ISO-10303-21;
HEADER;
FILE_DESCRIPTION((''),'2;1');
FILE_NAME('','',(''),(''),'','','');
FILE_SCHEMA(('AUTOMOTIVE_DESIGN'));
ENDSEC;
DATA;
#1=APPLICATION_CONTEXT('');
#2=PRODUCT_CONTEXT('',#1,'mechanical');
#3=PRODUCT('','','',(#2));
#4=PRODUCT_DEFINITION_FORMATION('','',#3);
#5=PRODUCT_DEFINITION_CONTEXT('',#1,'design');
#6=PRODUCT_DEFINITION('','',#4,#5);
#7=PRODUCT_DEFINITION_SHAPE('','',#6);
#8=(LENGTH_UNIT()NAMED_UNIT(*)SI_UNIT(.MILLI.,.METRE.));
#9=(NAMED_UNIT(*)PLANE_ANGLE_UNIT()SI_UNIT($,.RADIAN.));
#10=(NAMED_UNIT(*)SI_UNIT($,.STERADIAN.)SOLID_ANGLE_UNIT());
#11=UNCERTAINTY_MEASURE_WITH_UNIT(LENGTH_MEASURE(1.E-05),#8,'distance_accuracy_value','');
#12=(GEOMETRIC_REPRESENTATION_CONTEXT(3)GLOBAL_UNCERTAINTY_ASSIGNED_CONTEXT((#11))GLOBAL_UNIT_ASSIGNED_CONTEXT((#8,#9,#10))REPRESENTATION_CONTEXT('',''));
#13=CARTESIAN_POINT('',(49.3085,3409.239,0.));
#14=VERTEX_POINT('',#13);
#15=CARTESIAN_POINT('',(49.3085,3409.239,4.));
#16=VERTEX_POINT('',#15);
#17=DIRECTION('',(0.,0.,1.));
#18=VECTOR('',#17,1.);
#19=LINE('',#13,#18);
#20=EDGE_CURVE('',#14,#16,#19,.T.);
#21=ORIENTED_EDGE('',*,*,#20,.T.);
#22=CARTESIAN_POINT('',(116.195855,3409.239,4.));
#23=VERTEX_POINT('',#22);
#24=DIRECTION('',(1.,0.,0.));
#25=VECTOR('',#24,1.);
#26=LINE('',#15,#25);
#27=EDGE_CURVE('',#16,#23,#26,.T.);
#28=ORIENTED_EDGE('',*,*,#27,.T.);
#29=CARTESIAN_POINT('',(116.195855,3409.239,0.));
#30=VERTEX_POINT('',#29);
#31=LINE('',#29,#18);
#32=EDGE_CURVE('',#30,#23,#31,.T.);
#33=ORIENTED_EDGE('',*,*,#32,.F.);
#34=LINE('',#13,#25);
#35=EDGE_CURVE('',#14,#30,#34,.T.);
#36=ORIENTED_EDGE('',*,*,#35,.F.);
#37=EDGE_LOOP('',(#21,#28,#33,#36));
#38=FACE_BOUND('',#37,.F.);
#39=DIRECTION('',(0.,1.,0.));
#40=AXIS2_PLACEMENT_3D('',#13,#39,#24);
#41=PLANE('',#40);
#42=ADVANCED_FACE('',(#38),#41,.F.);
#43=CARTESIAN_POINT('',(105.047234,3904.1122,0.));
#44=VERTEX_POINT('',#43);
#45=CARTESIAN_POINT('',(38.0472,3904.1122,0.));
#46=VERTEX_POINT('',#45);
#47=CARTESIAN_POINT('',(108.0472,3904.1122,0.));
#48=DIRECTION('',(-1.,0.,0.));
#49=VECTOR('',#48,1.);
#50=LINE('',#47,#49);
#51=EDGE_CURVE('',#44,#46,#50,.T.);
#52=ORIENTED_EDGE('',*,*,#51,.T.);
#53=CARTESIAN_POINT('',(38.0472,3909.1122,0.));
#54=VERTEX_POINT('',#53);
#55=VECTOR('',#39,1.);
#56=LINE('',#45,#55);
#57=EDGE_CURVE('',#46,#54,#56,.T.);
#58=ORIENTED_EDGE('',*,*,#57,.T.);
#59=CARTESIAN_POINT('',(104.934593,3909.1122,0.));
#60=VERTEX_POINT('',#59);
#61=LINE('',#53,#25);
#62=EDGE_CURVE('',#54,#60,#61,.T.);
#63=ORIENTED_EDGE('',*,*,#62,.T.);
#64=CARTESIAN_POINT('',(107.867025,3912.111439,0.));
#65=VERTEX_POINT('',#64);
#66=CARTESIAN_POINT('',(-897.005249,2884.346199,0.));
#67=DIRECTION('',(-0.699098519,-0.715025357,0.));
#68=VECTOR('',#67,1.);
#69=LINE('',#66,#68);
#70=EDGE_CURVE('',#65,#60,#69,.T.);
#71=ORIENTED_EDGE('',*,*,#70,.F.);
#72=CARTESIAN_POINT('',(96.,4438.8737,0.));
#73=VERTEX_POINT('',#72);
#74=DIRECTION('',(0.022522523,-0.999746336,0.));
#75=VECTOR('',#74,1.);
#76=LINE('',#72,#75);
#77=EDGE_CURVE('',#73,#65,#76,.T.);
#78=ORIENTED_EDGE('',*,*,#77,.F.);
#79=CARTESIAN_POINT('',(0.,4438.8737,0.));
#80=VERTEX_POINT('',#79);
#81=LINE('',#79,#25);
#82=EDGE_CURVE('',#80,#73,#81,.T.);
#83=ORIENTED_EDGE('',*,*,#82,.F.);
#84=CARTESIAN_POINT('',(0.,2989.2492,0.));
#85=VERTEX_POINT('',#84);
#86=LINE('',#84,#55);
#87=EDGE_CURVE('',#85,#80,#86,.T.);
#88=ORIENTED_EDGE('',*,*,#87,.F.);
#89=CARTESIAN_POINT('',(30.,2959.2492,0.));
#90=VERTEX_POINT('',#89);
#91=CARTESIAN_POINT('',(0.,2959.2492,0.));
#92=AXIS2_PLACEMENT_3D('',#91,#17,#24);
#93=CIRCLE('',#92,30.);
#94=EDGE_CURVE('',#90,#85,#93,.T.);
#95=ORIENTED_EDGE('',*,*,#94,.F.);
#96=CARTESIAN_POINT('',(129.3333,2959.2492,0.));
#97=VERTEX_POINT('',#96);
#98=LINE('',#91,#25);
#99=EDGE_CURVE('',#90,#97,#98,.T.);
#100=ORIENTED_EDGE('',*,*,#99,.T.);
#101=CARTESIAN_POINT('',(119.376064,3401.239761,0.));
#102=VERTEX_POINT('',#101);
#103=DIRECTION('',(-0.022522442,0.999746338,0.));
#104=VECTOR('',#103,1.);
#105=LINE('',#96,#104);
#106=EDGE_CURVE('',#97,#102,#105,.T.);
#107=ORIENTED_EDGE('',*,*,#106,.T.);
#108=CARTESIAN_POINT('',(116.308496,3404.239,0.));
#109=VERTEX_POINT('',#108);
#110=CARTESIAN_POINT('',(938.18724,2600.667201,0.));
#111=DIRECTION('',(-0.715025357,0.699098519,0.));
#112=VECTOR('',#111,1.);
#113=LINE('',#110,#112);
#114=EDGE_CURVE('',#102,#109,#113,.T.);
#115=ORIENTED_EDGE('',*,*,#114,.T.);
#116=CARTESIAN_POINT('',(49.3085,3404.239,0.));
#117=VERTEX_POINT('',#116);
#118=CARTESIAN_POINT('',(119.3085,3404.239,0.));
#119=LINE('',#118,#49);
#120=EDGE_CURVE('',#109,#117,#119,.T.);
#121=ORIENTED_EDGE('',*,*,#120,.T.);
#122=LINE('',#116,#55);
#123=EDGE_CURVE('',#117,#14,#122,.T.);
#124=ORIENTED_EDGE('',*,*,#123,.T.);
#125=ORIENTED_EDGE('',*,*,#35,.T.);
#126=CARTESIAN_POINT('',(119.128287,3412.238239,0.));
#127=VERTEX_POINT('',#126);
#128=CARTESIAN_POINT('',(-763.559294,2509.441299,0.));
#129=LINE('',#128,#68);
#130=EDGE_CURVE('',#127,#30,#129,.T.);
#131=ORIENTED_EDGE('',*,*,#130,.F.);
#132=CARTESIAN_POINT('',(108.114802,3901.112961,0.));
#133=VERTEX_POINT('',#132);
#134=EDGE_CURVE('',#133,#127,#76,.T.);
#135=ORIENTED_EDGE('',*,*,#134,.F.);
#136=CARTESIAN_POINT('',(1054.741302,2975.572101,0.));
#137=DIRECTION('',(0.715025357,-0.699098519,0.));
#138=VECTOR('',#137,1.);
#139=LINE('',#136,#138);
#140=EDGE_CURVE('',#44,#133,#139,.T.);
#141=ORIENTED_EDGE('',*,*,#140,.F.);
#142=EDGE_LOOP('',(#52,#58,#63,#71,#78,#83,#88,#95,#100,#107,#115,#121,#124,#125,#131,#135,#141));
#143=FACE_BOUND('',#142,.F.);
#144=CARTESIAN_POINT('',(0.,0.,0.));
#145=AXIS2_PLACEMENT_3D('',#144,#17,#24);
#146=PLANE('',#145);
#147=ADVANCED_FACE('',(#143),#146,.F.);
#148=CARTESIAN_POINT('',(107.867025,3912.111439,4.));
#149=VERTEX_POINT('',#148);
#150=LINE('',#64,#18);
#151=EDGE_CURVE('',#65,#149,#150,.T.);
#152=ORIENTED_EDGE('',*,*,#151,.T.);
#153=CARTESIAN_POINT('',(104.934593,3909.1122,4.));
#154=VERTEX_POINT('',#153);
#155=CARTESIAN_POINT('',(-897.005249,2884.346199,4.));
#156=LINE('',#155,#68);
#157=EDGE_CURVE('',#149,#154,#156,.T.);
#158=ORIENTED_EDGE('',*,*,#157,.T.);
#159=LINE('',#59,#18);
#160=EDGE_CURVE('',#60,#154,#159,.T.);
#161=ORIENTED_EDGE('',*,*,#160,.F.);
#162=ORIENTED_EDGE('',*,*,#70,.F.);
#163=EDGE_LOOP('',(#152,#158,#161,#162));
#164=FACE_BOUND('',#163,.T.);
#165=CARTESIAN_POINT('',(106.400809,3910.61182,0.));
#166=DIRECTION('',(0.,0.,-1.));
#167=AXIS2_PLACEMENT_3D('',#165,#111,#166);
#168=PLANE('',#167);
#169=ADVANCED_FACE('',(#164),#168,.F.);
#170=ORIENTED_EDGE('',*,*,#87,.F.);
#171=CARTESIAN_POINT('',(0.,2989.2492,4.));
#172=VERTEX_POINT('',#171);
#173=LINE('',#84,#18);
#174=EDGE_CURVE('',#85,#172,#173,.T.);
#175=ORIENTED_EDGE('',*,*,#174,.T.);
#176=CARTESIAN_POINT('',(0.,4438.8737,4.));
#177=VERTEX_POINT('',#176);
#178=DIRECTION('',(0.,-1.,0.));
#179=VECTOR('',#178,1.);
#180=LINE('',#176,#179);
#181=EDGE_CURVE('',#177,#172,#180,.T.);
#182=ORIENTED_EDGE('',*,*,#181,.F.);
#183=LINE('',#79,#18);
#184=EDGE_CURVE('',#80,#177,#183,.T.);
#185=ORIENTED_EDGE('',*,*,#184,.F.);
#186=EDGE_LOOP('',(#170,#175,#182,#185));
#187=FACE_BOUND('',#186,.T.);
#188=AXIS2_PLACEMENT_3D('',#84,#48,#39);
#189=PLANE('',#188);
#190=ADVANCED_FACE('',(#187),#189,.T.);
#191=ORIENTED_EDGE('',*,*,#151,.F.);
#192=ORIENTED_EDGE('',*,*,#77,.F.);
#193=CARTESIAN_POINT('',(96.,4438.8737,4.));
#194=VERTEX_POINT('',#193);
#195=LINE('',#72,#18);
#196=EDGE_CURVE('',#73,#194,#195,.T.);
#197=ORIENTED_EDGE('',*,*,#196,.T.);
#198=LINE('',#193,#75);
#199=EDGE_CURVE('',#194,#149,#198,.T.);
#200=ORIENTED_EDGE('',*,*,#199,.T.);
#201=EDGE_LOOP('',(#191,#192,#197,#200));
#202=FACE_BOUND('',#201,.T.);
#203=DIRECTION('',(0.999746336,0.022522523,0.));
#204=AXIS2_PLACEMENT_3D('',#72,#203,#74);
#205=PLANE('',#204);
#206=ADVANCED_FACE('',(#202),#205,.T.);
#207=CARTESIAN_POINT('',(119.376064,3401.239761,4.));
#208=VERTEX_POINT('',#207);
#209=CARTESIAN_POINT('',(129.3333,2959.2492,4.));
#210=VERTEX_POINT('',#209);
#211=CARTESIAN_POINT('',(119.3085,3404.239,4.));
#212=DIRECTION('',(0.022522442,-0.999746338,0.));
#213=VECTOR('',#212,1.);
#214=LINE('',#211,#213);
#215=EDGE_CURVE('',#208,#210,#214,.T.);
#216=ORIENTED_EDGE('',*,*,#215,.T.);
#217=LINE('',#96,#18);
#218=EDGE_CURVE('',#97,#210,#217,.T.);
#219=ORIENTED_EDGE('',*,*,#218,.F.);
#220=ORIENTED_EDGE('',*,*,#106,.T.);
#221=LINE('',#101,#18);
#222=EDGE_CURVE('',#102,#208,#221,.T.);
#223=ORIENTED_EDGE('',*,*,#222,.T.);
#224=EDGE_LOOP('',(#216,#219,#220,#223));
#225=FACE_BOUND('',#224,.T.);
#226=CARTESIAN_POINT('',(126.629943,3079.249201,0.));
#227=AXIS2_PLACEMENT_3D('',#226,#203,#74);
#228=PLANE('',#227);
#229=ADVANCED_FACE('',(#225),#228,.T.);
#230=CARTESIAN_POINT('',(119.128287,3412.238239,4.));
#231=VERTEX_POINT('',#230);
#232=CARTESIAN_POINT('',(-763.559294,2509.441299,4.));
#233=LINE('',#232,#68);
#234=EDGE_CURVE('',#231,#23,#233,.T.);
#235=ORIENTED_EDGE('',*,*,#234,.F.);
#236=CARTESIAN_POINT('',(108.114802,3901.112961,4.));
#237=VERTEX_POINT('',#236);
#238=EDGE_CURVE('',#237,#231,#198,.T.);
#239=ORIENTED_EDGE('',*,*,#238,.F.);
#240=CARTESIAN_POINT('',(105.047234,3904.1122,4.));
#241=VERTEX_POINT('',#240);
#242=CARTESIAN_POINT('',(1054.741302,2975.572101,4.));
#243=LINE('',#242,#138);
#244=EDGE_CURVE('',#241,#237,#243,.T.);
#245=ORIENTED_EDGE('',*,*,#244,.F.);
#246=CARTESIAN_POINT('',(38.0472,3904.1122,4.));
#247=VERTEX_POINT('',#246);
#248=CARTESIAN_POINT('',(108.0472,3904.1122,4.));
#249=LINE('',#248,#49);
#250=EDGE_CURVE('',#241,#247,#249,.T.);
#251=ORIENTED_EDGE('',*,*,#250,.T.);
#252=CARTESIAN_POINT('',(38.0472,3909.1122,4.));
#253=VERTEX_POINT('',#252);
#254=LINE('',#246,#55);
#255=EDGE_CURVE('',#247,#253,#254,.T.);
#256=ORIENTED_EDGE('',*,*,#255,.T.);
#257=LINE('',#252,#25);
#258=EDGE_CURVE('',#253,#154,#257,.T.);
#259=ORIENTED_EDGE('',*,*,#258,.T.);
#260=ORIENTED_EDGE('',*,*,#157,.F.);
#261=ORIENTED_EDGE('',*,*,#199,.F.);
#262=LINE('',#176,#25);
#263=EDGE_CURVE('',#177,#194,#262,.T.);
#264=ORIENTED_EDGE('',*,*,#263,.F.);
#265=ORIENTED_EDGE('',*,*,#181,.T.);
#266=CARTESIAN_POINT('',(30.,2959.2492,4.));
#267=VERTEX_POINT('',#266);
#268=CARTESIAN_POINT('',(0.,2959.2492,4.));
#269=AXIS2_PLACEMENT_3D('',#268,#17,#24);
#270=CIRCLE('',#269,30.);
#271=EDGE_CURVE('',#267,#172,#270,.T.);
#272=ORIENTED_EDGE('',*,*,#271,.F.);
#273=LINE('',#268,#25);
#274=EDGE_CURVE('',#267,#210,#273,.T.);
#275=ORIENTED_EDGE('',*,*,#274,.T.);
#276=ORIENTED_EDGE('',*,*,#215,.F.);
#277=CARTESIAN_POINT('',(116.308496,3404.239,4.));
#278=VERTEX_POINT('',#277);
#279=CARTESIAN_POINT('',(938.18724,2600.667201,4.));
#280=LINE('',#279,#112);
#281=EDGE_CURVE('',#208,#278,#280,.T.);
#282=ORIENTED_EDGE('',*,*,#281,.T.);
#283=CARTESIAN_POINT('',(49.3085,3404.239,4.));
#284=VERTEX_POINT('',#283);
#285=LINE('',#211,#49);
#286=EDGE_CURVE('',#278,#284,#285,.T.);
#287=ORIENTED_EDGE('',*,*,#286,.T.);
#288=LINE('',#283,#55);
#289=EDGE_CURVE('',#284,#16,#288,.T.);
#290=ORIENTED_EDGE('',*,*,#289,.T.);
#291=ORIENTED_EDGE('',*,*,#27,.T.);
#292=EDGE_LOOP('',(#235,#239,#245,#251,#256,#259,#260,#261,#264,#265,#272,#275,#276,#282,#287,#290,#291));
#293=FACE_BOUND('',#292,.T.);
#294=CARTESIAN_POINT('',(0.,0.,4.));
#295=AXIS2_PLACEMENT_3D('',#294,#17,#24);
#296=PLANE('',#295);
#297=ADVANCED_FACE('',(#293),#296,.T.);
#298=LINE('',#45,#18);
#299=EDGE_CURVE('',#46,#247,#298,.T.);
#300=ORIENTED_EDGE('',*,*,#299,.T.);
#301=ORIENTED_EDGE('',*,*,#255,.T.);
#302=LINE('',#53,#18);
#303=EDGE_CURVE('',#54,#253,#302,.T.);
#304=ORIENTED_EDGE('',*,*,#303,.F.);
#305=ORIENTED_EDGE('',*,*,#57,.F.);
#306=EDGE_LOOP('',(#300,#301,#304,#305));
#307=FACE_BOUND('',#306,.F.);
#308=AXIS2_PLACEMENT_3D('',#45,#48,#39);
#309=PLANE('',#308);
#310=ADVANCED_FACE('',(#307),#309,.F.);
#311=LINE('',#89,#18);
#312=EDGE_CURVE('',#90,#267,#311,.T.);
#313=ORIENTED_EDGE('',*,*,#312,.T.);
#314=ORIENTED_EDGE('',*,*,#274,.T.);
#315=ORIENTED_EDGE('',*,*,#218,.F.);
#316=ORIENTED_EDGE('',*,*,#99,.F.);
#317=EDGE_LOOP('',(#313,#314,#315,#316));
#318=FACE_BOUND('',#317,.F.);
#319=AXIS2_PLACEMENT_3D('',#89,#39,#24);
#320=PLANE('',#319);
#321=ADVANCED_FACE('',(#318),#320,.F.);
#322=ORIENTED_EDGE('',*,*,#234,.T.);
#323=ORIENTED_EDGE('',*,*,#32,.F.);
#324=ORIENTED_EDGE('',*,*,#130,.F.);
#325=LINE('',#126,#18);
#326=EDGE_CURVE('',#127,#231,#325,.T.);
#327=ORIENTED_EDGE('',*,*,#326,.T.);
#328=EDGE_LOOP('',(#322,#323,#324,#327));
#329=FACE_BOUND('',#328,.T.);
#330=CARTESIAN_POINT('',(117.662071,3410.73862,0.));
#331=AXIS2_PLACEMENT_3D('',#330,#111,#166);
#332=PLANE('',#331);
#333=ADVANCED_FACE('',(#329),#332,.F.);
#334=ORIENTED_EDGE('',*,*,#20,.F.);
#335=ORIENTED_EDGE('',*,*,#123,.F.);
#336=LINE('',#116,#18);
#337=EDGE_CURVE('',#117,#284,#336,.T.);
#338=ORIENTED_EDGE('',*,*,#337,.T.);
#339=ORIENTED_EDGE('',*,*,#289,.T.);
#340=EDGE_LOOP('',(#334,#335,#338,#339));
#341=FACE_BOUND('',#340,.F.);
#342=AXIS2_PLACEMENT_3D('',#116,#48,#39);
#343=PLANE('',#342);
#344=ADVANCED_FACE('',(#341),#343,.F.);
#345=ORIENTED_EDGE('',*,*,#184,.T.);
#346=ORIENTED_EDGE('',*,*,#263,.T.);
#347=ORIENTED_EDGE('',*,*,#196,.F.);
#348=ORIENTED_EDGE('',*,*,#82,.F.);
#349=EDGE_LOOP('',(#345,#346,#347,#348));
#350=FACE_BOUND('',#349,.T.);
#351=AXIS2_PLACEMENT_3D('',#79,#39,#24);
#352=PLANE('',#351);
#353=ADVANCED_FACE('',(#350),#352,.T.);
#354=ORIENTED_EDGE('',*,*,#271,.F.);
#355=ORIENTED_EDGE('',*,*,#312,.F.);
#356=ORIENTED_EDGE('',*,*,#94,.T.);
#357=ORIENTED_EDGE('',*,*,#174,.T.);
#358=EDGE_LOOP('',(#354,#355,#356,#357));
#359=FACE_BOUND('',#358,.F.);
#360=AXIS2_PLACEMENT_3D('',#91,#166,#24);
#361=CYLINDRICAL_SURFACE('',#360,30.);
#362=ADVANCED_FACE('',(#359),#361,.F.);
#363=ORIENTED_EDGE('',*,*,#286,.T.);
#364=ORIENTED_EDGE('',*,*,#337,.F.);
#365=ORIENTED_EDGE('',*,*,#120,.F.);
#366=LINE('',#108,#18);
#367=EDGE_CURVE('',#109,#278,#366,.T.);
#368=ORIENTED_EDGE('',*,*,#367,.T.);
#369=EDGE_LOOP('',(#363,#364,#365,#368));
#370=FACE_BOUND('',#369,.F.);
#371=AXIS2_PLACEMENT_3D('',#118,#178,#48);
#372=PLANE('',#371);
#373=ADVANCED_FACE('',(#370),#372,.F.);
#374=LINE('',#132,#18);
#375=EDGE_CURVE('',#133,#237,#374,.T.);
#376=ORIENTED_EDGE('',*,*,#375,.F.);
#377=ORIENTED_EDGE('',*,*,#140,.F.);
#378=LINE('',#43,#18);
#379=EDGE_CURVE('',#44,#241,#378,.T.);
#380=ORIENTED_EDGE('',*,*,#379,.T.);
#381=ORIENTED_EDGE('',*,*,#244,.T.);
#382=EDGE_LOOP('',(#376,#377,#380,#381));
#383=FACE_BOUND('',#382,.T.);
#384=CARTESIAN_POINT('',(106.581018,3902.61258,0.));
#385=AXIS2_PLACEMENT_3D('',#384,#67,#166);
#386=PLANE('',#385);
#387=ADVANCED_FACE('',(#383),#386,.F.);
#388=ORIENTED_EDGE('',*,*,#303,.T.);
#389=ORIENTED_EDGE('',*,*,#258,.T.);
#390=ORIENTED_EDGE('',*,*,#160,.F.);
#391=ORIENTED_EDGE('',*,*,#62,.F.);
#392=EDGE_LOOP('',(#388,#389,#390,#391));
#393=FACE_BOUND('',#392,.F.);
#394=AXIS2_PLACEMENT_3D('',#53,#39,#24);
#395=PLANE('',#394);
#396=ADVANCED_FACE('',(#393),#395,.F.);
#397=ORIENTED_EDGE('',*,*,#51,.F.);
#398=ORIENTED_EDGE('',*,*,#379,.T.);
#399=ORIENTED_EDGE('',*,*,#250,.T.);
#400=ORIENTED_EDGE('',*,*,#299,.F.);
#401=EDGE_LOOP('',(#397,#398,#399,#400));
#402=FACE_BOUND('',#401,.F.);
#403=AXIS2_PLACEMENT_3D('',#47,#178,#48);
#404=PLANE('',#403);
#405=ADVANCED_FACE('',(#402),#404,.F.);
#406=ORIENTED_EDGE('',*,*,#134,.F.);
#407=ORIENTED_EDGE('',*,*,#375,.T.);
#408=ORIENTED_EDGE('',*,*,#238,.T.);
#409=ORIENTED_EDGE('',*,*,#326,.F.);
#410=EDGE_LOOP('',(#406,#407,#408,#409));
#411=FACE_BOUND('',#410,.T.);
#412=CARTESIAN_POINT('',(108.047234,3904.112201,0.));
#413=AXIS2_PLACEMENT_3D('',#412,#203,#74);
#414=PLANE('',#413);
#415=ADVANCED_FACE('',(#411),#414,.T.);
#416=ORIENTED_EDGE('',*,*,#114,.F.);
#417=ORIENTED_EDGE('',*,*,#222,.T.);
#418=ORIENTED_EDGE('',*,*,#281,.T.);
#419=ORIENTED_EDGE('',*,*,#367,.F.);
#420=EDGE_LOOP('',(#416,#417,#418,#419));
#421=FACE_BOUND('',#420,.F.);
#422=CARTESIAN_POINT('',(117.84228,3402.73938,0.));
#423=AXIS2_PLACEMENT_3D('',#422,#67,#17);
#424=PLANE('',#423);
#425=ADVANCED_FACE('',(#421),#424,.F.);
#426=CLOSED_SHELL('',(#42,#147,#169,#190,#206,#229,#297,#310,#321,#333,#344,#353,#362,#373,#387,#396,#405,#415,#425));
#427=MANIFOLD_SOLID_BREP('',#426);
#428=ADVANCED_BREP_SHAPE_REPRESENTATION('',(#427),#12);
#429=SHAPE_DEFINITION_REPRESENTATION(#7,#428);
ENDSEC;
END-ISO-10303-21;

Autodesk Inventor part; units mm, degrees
ref_plane "YZ Plane" through (0, 0, 0) normal (1, 0, 0) x (0, 1, 0)
ref_plane "XZ Plane" through (0, 0, 0) normal (0, 1, 0) x (-1, 0, 0)
ref_plane "XY Plane" through (0, 0, 0) normal (0, 0, 1) x (1, 0, 0)
sketch "Sketch1" plane through (0, 0, 0) normal (0, 0, 1) x (1, 0, 0)
  line L0 (0, 0) -> (0, 4438.8737)
  line L1 (0, 4438.8737) -> (96, 4438.8737)
  line L2 (96, 4438.8737) -> (196, 0)
  line L3 (196, 0) -> (0, 0)
  circle A0 centre (0, 0) radius 30
  line L4 (0, 1479.6246) -> (162.6667, 1479.6246)
  line L5 (0, 2959.2492) -> (129.3333, 2959.2492)
  circle A1 centre (0, 1479.6246) radius 30
  circle A2 centre (0, 2959.2492) radius 30
  line L6 (186.8761, 405) -> (116.8761, 405)
  line L7 (116.8761, 405) -> (116.8761, 410)
  line L8 (116.8761, 410) -> (186.8761, 410)
  line L9 (186.8761, 410) -> (186.8761, 405)
  line L10 (105.6148, 909.8732) -> (175.6148, 909.8732)
  line L11 (175.6148, 904.8732) -> (105.6148, 904.8732)
  line L12 (105.6148, 904.8732) -> (105.6148, 909.8732)
  line L13 (175.6148, 909.8732) -> (175.6148, 904.8732)
  line L14 (94.3535, 1409.7463) -> (164.3535, 1409.7463)
  line L15 (164.3535, 1404.7463) -> (94.3535, 1404.7463)
  line L16 (94.3535, 1404.7463) -> (94.3535, 1409.7463)
  line L17 (164.3535, 1409.7463) -> (164.3535, 1404.7463)
  line L18 (83.0923, 1909.6195) -> (153.0923, 1909.6195)
  line L19 (153.0923, 1904.6195) -> (83.0923, 1904.6195)
  line L20 (83.0923, 1904.6195) -> (83.0923, 1909.6195)
  line L21 (153.0923, 1909.6195) -> (153.0923, 1904.6195)
  line L22 (71.831, 2409.4927) -> (141.831, 2409.4927)
  line L23 (141.831, 2404.4927) -> (71.831, 2404.4927)
  line L24 (71.831, 2404.4927) -> (71.831, 2409.4927)
  line L25 (141.831, 2409.4927) -> (141.831, 2404.4927)
  line L26 (60.5698, 2909.3658) -> (130.5698, 2909.3658)
  line L27 (130.5698, 2904.3658) -> (60.5698, 2904.3658)
  line L28 (60.5698, 2904.3658) -> (60.5698, 2909.3658)
  line L29 (130.5698, 2909.3658) -> (130.5698, 2904.3658)
  line L30 (49.3085, 3409.239) -> (119.3085, 3409.239)
  line L31 (119.3085, 3404.239) -> (49.3085, 3404.239)
  line L32 (49.3085, 3404.239) -> (49.3085, 3409.239)
  line L33 (119.3085, 3409.239) -> (119.3085, 3404.239)
  line L34 (38.0472, 3909.1122) -> (108.0472, 3909.1122)
  line L35 (108.0472, 3904.1122) -> (38.0472, 3904.1122)
  line L36 (38.0472, 3904.1122) -> (38.0472, 3909.1122)
  line L37 (108.0472, 3909.1122) -> (108.0472, 3904.1122)
  line L38 (0, 1629.6246) -> (159.2874, 1629.6246)
  line L39 (0, 3079.2492) -> (126.6299, 3079.2492)
  point P0 (30, 2959.2492)
  point P1 (0, 2929.2492)
  point P2 (0, 1509.6246)
  point P3 (0, 1449.6246)
  point P4 (0, 30)
  point P5 (30, 0)
  point P6 (186.7634, 410)
  point P7 (175.5022, 909.8732)
  point P8 (164.2409, 1409.7463)
  point P9 (30, 1479.6246)
  point P10 (153.0923, 1904.6195)
  point P11 (152.9796, 1909.6195)
  point P12 (141.831, 2404.4927)
  point P13 (141.7184, 2409.4927)
  point P14 (130.5698, 2904.3658)
  point P15 (130.4571, 2909.3658)
  point P16 (0, 2989.2492)
  point P17 (119.3085, 3404.239)
  point P18 (119.1959, 3409.239)
  point P19 (108.0472, 3904.1122)
  point P20 (107.9346, 3909.1122)
  dimension "d65" = 96
  dimension "d67" = 196
  dimension "d68" = 60
  dimension "d69" = 1480
  dimension "d70" = 1480
  dimension "d71" = 1480
  dimension "d72" = 5
  dimension "d73" = 70
  dimension "d74" = 410
  dimension "d77" = 500
  dimension "d82" = 120
  dimension "d83" = 150
extrude "Plate3" add sketch "Sketch1" along normal blind 4 contours L39 L2 L5 A2 L0 | L0 L1 L2 L34 L36 L35 L30 L32 L31 L39
chamfer "Corner Chamfer2" distance 3 angle 45 4 edges at (119.3085, 3404.239, 2) (119.1959, 3409.239, 2) (108.0472, 3904.1122, 2) (107.9346, 3909.1122, 2)
equation "\"BendRadius\" = Thickness"
equation "\"BendReliefWidth\" = Thickness"
equation "\"BendReliefDepth\" = 0.5 * Thickness"
equation "\"CornerReliefSize\" = 4 * Thickness"
equation "\"MinimumRemnant\" = 2 * Thickness"
equation "\"TransitionRadius\" = BendRadius"
equation "\"JacobiRadiusSize\" = BendRadius"
equation "\"GapSize\" = Thickness"
equation "\"Thickness\" = 4"
properties part number "GBK 3301 Center third rib" material "Steel"
